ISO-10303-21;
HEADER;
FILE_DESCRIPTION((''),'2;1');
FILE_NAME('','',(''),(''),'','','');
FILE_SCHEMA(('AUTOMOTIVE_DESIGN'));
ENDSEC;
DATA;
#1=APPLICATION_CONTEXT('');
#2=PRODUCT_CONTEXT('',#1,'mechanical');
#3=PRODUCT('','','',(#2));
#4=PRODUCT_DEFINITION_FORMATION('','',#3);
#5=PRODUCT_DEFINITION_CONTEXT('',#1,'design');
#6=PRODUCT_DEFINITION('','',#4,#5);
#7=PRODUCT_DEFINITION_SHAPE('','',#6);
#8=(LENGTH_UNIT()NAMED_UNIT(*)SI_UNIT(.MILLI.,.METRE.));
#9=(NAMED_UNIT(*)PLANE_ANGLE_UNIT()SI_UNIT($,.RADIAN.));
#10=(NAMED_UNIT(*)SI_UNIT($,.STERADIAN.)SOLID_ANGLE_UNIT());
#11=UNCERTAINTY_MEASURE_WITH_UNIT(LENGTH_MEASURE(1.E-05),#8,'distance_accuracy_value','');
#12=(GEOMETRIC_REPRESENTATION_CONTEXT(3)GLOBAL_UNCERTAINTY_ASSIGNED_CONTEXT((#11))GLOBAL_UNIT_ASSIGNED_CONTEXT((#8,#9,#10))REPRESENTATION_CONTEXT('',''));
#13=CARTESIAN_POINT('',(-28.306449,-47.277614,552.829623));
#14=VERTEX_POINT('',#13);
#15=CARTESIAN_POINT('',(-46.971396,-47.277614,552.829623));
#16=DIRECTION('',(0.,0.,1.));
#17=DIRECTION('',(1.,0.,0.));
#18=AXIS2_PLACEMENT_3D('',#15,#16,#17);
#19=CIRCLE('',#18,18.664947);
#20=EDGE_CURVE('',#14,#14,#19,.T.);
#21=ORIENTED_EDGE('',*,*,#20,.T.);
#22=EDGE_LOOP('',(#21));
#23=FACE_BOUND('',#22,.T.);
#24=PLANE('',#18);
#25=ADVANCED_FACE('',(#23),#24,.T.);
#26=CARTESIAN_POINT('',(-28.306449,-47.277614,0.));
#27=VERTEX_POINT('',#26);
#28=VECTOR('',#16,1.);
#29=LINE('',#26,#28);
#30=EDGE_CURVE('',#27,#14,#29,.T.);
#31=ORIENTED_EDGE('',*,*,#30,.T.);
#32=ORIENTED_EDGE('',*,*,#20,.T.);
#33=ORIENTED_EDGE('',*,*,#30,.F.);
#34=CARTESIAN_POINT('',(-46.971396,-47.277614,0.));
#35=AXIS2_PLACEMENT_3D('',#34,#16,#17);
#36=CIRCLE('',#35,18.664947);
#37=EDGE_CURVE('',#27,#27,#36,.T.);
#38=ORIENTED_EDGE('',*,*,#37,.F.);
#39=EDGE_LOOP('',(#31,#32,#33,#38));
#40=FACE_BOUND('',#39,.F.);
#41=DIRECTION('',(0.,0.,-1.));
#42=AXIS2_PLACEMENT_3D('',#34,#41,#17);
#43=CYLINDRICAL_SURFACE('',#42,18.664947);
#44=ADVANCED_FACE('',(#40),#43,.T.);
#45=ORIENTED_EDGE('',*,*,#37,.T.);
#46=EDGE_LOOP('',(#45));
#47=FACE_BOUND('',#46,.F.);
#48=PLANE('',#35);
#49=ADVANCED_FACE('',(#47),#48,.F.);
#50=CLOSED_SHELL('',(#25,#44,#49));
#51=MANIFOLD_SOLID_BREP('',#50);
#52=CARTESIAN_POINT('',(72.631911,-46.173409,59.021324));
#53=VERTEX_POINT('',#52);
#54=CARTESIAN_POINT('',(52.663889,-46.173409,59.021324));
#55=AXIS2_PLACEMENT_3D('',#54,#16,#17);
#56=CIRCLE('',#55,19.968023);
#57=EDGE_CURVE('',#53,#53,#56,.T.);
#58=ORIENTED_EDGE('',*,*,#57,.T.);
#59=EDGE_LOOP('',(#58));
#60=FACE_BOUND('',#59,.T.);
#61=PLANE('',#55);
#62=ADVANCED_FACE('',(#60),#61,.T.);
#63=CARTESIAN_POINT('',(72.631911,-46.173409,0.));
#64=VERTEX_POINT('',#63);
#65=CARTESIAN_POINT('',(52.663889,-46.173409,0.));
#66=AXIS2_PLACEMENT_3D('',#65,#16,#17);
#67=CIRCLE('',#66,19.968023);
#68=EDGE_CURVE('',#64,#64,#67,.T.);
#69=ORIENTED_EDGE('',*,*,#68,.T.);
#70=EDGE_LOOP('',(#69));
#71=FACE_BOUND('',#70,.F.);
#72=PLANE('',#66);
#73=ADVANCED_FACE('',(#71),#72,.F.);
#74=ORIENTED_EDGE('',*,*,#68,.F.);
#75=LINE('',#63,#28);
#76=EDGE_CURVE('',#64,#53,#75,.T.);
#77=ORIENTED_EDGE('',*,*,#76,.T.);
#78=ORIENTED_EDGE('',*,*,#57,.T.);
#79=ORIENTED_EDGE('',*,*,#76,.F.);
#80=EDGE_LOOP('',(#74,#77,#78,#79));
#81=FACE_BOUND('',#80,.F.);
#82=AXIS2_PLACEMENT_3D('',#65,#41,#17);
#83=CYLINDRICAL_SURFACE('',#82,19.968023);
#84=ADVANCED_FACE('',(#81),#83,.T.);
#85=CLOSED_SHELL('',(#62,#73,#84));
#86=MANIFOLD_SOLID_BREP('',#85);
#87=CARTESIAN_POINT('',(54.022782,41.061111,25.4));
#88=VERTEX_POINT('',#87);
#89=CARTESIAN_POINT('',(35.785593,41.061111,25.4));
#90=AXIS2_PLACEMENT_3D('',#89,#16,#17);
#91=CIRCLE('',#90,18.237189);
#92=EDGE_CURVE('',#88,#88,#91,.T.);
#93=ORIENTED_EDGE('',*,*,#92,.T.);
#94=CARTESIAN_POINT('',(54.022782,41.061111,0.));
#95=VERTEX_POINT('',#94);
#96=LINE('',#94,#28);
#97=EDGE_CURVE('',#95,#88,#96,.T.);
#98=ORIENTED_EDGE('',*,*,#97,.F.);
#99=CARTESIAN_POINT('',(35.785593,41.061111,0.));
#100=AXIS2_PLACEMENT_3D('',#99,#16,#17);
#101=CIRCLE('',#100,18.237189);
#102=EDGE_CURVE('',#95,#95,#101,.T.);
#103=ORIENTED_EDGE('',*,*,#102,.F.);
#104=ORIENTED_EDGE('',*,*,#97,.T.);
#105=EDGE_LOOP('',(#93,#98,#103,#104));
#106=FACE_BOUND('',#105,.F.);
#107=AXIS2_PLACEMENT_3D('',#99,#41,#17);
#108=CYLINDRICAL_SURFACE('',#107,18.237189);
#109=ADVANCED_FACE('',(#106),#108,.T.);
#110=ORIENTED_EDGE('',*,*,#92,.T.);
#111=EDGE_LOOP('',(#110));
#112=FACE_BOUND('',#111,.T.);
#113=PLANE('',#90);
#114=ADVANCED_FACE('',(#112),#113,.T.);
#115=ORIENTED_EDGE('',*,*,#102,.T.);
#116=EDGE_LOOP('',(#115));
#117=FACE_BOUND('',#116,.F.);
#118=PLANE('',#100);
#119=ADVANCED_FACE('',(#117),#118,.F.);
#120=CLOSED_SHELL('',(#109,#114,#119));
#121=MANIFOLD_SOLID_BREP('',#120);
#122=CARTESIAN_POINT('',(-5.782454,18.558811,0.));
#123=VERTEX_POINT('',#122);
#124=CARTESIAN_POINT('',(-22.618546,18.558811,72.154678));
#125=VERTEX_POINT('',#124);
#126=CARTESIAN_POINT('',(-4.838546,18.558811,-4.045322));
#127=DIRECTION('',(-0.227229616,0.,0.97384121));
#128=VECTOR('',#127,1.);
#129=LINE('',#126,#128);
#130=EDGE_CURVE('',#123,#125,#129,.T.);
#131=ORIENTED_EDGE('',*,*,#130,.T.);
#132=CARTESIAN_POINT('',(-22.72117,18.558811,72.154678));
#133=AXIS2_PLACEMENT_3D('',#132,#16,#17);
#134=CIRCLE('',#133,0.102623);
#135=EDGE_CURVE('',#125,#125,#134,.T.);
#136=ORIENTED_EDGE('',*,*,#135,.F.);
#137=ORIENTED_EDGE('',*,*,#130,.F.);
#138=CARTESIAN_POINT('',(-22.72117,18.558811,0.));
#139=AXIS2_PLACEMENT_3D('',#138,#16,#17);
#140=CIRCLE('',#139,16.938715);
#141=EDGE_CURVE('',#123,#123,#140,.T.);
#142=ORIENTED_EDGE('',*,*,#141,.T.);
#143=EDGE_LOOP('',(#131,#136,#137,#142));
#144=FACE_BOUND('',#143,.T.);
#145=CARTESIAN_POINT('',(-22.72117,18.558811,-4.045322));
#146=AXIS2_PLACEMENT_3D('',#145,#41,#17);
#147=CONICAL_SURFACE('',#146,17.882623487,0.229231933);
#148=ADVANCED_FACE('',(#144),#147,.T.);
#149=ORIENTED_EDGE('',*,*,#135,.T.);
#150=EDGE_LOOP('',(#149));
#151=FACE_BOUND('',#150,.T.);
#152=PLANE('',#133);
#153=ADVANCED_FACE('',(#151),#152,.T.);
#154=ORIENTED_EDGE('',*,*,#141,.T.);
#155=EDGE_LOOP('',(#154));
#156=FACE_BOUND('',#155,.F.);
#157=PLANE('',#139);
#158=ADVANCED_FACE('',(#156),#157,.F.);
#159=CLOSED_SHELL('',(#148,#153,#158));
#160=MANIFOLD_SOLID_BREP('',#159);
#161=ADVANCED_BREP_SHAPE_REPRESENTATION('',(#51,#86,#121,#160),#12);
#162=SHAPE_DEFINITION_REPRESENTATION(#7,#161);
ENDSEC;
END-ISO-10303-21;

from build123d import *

# Parameters (mm, degrees)
F0_R     = 19.9680226168
F1_DEPTH = 59.0213239193
F2_R     = 18.2371893678
F3_DEPTH = 25.4
F6_R     = 18.6649469358
F7_DEPTH = 552.8296232224
F8_R     = 17.8826234865
F9_DEPTH = 72.1546784043


# Not quite as in the source:
# - a fillet or chamfer that OpenCascade refuses, or shapes differently, is made with other operations: its cross-section is extruded or revolved along the edge and cut away or added
# - the program builds the solid bodies; features that only make, move or delete a surface that nothing else refers to are left out


with BuildPart() as f1:
    # F0 (on Top) → F1 (new body)
    with BuildSketch(Plane.XY):
        with Locations((52.6638887823, -46.1734086275)):
            Circle(F0_R)
    extrude(amount=F1_DEPTH)


with BuildPart() as f3:
    # F2 (on Top) → F3 (new body)
    with BuildSketch(Plane.XY):
        with Locations((35.7855930924, 41.0611107945)):
            Circle(F2_R)
    extrude(amount=F3_DEPTH)


with BuildPart() as f7:
    # F6 (on Top) → F7 (new body)
    with BuildSketch(Plane.XY):
        with Locations((-46.9713956118, -47.2776144743)):
            Circle(F6_R)
    extrude(amount=F7_DEPTH)


with BuildPart() as f9:
    # F8 (on Top) → F9 (new body)
    with BuildSketch(Plane.XY):
        with Locations((-22.7211695164, 18.5588113964)):
            Circle(F8_R)
    extrude(amount=F9_DEPTH)

    # F10: chamfer of 17.78 x 76.2 on 1 edges, made by hand

    # F10_s1 → F10_t2 (revolve, cut)
    with BuildSketch(Plane.XZ.offset(-18.5588113964)):
        Polygon((-4.8385460299, -4.0453215957), (-22.6185460299, 72.1546784043), (-4.8385460299, 72.1546784043), align=None)
    revolve(axis=Axis((-22.7211695164, 18.5588113964, 72.1546784043), (0, 0, 1)), mode=Mode.SUBTRACT)


solid = Compound([f1.part, f3.part, f7.part, f9.part])
